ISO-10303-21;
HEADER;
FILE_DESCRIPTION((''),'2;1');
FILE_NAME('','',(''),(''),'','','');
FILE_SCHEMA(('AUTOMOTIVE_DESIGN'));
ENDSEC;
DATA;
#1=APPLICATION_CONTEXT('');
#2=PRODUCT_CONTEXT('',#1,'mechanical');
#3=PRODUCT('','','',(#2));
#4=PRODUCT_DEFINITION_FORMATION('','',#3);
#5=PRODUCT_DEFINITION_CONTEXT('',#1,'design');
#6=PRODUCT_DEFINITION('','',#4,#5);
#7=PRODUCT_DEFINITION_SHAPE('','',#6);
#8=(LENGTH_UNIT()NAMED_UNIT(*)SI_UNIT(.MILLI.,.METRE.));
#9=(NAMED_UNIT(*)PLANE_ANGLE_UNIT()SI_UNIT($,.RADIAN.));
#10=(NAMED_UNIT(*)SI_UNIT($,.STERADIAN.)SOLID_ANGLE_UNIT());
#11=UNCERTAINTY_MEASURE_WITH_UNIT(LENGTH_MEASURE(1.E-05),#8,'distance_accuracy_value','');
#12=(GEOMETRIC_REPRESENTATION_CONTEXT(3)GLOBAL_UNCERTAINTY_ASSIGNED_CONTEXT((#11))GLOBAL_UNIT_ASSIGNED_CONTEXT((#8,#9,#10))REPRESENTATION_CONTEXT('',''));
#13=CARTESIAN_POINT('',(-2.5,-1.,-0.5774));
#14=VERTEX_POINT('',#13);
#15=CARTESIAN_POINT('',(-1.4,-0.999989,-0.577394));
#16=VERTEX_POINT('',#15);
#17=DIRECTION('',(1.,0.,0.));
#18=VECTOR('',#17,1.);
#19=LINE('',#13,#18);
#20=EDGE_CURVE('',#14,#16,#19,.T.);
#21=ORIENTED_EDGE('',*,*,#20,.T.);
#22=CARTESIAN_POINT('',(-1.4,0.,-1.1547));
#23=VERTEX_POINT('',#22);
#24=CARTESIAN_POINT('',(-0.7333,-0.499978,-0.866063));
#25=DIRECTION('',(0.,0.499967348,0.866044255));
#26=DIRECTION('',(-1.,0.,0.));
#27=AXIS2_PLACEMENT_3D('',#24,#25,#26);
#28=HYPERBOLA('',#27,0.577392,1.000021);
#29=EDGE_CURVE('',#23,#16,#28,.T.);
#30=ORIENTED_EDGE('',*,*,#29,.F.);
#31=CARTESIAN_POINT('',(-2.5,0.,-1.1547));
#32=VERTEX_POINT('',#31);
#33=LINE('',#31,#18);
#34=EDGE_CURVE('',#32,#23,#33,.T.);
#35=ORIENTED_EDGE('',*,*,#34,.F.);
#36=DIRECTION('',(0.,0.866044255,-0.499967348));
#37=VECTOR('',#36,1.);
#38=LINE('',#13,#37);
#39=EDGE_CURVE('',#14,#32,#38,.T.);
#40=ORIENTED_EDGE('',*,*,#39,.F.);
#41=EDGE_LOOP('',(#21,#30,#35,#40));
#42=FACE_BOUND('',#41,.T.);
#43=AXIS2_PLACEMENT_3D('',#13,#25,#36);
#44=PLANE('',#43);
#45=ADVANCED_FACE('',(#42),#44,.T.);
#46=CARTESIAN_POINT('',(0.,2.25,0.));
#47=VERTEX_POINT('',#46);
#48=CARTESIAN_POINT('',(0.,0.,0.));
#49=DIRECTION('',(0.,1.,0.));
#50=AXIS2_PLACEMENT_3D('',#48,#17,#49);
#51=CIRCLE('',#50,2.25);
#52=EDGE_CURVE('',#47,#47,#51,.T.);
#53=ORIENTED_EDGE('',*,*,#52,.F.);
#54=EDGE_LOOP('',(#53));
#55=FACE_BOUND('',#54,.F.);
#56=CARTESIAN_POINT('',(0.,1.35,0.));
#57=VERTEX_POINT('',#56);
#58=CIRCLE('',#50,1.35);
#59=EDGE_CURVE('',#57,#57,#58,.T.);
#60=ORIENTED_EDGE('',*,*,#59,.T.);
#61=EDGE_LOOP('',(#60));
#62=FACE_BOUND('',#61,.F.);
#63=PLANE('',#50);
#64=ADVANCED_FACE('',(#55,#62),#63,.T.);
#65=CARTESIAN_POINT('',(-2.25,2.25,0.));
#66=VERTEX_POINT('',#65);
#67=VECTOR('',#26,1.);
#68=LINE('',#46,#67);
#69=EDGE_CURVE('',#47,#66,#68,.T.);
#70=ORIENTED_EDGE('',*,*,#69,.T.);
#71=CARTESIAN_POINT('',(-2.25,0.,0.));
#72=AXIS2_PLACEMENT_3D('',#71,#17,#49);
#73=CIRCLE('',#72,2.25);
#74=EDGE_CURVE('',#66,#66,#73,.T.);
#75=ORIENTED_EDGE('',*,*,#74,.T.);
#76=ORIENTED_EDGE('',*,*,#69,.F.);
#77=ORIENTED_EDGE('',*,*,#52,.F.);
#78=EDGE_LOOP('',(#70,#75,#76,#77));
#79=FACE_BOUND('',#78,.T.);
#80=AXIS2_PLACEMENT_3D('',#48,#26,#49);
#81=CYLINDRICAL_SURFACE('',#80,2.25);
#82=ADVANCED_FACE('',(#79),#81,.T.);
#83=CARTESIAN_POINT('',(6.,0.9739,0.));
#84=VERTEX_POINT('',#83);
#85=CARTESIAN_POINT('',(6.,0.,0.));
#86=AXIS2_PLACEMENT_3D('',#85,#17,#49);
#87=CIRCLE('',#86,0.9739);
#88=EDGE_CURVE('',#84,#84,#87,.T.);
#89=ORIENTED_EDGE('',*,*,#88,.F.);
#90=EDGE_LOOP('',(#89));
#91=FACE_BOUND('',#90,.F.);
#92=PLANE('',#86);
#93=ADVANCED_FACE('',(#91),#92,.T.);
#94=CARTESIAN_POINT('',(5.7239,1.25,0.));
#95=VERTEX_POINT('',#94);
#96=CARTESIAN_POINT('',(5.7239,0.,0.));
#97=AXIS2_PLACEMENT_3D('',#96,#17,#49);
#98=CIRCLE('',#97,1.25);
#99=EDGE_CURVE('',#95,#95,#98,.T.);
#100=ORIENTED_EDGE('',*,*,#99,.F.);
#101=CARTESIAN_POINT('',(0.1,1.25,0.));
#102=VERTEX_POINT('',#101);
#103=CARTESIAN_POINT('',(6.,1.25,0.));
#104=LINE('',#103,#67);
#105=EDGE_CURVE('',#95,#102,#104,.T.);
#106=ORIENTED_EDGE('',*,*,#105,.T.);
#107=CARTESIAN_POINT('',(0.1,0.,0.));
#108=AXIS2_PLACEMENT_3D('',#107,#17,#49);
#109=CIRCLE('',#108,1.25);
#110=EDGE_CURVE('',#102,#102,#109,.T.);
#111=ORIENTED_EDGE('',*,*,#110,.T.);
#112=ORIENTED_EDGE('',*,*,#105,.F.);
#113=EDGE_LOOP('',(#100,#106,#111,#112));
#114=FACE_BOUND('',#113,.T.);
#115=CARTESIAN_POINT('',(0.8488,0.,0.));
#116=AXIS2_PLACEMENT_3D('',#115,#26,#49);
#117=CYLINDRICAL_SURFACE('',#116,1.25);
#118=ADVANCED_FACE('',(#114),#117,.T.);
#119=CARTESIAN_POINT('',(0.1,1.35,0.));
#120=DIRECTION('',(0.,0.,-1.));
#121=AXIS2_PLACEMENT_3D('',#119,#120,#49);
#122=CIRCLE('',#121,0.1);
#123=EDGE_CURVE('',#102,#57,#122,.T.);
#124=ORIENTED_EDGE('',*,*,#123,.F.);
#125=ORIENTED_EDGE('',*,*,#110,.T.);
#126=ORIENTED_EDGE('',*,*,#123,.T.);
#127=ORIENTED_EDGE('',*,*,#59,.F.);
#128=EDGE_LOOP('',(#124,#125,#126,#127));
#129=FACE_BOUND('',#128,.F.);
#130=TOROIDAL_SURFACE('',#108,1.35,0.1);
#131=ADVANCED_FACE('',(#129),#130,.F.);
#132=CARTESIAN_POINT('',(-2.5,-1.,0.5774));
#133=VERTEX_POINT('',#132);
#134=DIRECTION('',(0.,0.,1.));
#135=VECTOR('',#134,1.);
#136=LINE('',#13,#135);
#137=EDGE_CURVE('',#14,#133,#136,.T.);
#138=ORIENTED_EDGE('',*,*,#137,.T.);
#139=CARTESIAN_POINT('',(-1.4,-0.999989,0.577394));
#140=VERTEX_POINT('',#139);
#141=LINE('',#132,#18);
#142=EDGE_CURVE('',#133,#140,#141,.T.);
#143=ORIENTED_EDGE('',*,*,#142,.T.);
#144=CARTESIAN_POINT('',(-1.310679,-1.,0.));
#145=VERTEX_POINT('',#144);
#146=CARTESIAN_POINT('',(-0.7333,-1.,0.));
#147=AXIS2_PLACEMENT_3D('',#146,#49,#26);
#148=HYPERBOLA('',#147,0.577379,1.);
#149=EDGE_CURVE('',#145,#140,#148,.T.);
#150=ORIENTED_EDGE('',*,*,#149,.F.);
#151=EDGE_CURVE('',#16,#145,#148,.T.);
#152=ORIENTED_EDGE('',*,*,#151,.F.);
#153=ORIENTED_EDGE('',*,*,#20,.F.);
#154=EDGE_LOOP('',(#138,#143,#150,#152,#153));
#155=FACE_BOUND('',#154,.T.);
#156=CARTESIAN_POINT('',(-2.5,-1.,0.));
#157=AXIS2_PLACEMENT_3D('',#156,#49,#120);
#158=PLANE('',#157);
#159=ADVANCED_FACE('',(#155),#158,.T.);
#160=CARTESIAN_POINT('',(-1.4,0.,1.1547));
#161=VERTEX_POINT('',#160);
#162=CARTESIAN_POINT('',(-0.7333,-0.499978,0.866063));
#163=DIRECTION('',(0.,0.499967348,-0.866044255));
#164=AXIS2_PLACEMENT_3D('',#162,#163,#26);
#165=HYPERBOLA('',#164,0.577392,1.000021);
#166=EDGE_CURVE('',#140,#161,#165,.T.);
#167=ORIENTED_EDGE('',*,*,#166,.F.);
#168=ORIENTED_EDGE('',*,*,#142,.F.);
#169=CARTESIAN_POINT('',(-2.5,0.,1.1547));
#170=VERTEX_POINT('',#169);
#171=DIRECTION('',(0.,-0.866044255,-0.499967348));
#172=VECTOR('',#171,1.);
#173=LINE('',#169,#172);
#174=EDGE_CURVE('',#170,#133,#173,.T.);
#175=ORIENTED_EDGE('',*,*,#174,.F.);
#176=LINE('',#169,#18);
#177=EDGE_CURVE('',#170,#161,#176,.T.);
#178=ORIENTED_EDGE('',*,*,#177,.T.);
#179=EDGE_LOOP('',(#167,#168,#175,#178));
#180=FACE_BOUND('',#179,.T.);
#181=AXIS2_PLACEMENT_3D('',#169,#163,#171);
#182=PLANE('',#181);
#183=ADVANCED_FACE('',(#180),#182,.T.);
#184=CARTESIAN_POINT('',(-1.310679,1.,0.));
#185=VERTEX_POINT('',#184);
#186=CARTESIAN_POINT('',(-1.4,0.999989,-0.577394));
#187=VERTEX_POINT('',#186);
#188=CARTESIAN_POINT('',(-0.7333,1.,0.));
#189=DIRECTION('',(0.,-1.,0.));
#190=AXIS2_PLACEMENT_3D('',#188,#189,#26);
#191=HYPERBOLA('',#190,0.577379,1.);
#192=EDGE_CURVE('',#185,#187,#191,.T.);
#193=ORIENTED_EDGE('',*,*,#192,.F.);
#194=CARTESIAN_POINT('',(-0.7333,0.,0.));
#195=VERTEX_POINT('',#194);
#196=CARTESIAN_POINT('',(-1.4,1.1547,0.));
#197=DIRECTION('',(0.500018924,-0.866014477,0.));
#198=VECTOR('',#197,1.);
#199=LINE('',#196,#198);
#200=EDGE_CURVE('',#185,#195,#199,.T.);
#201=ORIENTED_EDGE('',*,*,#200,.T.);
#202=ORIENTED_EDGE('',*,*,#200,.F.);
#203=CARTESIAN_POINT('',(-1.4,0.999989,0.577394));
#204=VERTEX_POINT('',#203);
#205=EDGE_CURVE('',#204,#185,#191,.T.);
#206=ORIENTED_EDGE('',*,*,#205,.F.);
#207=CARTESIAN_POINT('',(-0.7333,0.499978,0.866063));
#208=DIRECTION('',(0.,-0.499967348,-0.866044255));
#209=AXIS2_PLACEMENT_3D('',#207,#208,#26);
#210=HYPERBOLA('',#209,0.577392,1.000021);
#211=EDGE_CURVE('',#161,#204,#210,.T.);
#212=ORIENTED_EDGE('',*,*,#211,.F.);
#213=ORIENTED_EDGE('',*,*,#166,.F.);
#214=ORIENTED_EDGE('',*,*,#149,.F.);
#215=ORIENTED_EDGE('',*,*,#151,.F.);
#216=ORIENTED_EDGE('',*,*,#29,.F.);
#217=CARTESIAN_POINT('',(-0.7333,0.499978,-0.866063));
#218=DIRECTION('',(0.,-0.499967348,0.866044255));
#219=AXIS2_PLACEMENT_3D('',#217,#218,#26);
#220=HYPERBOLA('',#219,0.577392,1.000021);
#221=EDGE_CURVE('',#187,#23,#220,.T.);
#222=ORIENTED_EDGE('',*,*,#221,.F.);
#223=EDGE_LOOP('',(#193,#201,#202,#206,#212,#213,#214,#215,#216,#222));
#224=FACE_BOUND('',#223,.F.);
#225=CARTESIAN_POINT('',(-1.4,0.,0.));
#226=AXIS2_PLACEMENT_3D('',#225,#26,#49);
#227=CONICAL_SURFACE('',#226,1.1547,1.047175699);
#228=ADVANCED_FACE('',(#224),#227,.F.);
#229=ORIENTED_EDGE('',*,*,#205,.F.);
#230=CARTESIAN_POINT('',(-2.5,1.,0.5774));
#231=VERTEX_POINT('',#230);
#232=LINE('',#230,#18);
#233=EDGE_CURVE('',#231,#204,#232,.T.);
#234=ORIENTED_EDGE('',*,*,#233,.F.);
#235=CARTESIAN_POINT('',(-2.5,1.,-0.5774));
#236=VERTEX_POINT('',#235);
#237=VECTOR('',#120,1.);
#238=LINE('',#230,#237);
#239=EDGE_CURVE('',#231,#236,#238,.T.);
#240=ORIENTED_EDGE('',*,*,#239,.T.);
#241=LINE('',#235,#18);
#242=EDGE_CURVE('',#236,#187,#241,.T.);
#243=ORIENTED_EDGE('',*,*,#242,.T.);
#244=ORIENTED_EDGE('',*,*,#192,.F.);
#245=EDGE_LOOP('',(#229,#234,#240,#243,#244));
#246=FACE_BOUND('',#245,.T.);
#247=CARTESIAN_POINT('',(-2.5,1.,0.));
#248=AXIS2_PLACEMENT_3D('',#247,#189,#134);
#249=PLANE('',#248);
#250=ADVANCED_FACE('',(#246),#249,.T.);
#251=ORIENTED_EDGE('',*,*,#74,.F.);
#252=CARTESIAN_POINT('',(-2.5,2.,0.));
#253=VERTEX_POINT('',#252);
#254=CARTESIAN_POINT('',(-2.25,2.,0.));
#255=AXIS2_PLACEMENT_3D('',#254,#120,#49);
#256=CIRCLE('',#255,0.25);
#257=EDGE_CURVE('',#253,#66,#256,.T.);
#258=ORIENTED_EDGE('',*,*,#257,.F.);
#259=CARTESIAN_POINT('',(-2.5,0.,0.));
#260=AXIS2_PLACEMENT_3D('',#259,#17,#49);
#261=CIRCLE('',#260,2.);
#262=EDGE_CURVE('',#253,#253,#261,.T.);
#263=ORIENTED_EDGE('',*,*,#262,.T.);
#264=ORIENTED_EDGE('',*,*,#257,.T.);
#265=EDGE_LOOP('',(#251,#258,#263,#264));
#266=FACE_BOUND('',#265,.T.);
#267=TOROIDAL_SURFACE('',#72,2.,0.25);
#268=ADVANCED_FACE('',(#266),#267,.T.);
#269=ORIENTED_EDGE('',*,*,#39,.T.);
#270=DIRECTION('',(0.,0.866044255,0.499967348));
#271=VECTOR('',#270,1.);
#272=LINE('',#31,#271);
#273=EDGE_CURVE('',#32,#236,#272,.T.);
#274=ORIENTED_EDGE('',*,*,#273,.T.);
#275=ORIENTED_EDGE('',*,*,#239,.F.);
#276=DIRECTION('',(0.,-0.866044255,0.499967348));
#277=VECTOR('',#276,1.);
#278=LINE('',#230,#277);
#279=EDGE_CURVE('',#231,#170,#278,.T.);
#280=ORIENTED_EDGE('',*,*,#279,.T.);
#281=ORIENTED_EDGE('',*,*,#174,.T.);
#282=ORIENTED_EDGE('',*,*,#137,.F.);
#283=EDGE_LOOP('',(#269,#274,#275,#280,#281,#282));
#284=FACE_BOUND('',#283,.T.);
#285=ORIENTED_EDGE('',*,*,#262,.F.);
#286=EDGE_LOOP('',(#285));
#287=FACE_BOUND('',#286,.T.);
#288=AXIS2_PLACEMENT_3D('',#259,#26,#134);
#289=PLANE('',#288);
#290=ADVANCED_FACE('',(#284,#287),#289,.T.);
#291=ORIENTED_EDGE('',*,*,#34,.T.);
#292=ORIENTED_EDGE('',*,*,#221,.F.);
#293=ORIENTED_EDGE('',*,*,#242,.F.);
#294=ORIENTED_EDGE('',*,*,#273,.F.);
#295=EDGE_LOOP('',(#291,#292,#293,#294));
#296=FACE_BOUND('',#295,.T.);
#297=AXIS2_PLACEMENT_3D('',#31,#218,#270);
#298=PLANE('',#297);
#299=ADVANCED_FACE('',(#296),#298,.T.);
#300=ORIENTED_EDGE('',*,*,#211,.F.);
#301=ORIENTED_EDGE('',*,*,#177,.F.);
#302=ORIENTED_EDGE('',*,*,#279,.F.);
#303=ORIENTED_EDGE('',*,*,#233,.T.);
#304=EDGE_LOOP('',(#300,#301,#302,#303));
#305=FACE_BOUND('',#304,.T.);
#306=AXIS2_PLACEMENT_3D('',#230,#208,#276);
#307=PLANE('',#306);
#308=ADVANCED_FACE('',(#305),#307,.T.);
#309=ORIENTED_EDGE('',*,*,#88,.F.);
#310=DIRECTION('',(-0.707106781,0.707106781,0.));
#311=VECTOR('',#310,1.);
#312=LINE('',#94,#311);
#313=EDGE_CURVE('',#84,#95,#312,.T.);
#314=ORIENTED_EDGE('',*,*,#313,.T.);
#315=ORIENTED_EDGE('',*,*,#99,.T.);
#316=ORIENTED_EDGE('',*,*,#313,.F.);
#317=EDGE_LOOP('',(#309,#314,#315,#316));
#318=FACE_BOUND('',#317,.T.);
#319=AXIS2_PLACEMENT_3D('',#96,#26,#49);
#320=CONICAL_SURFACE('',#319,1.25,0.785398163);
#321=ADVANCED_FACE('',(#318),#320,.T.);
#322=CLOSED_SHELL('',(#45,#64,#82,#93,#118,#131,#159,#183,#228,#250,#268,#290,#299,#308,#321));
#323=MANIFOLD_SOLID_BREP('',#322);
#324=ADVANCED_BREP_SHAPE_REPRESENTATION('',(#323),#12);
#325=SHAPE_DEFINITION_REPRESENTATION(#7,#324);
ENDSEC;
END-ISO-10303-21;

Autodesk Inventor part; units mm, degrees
ref_plane "YZ Plane" through (0, 0, 0) normal (1, 0, 0) x (0, 1, 0)
ref_plane "XZ Plane" through (0, 0, 0) normal (0, 1, 0) x (-1, 0, 0)
sketch "Sketch1" plane through (0, 0, 0) normal (0, 0, 1) x (1, 0, 0)
  line L0 (-0.7333, 0) -> (6, 0)
  line L1 (6, 0) -> (6, 1.25)
  line L2 (6, 1.25) -> (1.125, 1.25)
  line L3 (1.125, 1.25) -> (0.8488, 1.25)
  line L4 (0.8488, 1.25) -> (0, 1.25)
  line L5 (0, 1.25) -> (0, 2.25)
  line L6 (0, 2.25) -> (-2.5, 2.25)
  line L7 (-2.5, 2.25) -> (-2.5, 1.1547)
  line L8 (-2.5, 1.1547) -> (-1.4, 1.1547)
  line L9 (-1.4, 1.1547) -> (-0.7333, 0)
  line L10 (-4.2, 0) -> (7.7, 0) projected
  line L11 (0, -0.45) -> (0, 2.7) projected
  line L12 (1.125, 1.25) -> (0, 1.25) construction
  dimension "d1" = 4.875
  dimension "d2" = 0.2762
  dimension "d3" = 2.5
  dimension "d4" = 1.1
  dimension "d5" = 60
  dimension "d6" = 2.5
  dimension "d7" = 2.5
  dimension "d8" = 2.3094
  dimension "d9" = 4.5
  dimension "d26" = 6
revolve "Body" add sketch "Sketch1" angle 360 about axis through (-0.7333, 0, 0) along (1, 0, 0)
sketch "Sketch2" plane through (-2.5, 0, 0) normal (-1, 0, 0) x (0, 0, 1)
  circle A0 centre (0, 0) radius 1.1547 projected
  line L0 (0, -3.15) -> (0, 3.15) projected
  line L1 (-3.15, 0) -> (3.15, 0) projected
  line L2 (1.1547, 0) -> (0.5774, -1)
  line L3 (0.5774, -1) -> (-0.5774, -1)
  line L4 (-0.5774, -1) -> (-1.1547, 0)
  line L5 (-1.1547, 0) -> (-0.5774, 1)
  line L6 (-0.5774, 1) -> (0.5774, 1)
  line L7 (0.5774, 1) -> (1.1547, 0)
extrude "Slot" add sketch "Sketch2" against normal up to next contours L7 A0 | A0 L2 | L6 L0 A0 | A0 L0 L3 | L0 L6 A0 | A0 L3 L0 | L4 A0 | A0 L5
fillet "Fillet1" radius 0.25 1 edges at (-2.5, -2.25, 0)
thread "Thread" size "M2.5x0.45" class "6g" standard "ISO Metric profile" length 4.875
chamfer "Chamfer1" distance 0.2761 distance2 0.2761 1 edges at (6, -1.25, 0) measured on face at (6, -0.1825, -0.5629)
ref_plane "Work Plane1" through (29, 0, 0) normal (0, -1, 0) x (1, 0, 0)
fillet "Fillet2" radius 0.1 1 edges at (0, -1.25, 0)
equation "\"d1\" = GEL"
equation "\"d3\" = KOH"
equation "\"d4\" = INTI"
equation "\"d6\" = GD"
equation "\"d7\" = BDM"
equation "\"d8\" = 1.1547 * SW"
equation "\"d9\" = KOD"
equation "\"d26\" = NLG"
equation "\"d30\" = R"
equation "\"d17\" = RR"
equation "\"d13\" = GEL"
equation "\"d15\" = -0.5 * SPD + 0.5 * GD"
equation "\"d16\" = GUL"
equation "\"GD\" = NND"
equation "\"NLG\" = 6"
equation "\"GEL\" = 4.875"
equation "\"KOD\" = 4.5"
equation "\"KOH\" = NND"
equation "\"INTI\" = 1.1"
equation "\"GAL\" = 0.61345 * PTC"
equation "\"GUL\" = 0.61345 * PTC"
equation "\"BDM\" = NND"
equation "\"SW\" = 2"
equation "\"RR\" = 0.1 * NND"
equation "\"SPD\" = NND - 1.2269 * PTC"
equation "\"R\" = 0.1"
equation "\"TOA\" = 30deg"
equation "\"GD1\" = THREADDIA - 1.2269 * PTC"
equation "\"THREADDIA\" = NND"
equation "\"FAWI\" = 45deg"
equation "\"PTC\" = 0.45"
equation "\"NND\" = 2.5"
equation "\"E0\" = 1.155 * SW"
properties part number "BS EN ISO 4762 - M2.5 x 6" material "Steel, Mild"
